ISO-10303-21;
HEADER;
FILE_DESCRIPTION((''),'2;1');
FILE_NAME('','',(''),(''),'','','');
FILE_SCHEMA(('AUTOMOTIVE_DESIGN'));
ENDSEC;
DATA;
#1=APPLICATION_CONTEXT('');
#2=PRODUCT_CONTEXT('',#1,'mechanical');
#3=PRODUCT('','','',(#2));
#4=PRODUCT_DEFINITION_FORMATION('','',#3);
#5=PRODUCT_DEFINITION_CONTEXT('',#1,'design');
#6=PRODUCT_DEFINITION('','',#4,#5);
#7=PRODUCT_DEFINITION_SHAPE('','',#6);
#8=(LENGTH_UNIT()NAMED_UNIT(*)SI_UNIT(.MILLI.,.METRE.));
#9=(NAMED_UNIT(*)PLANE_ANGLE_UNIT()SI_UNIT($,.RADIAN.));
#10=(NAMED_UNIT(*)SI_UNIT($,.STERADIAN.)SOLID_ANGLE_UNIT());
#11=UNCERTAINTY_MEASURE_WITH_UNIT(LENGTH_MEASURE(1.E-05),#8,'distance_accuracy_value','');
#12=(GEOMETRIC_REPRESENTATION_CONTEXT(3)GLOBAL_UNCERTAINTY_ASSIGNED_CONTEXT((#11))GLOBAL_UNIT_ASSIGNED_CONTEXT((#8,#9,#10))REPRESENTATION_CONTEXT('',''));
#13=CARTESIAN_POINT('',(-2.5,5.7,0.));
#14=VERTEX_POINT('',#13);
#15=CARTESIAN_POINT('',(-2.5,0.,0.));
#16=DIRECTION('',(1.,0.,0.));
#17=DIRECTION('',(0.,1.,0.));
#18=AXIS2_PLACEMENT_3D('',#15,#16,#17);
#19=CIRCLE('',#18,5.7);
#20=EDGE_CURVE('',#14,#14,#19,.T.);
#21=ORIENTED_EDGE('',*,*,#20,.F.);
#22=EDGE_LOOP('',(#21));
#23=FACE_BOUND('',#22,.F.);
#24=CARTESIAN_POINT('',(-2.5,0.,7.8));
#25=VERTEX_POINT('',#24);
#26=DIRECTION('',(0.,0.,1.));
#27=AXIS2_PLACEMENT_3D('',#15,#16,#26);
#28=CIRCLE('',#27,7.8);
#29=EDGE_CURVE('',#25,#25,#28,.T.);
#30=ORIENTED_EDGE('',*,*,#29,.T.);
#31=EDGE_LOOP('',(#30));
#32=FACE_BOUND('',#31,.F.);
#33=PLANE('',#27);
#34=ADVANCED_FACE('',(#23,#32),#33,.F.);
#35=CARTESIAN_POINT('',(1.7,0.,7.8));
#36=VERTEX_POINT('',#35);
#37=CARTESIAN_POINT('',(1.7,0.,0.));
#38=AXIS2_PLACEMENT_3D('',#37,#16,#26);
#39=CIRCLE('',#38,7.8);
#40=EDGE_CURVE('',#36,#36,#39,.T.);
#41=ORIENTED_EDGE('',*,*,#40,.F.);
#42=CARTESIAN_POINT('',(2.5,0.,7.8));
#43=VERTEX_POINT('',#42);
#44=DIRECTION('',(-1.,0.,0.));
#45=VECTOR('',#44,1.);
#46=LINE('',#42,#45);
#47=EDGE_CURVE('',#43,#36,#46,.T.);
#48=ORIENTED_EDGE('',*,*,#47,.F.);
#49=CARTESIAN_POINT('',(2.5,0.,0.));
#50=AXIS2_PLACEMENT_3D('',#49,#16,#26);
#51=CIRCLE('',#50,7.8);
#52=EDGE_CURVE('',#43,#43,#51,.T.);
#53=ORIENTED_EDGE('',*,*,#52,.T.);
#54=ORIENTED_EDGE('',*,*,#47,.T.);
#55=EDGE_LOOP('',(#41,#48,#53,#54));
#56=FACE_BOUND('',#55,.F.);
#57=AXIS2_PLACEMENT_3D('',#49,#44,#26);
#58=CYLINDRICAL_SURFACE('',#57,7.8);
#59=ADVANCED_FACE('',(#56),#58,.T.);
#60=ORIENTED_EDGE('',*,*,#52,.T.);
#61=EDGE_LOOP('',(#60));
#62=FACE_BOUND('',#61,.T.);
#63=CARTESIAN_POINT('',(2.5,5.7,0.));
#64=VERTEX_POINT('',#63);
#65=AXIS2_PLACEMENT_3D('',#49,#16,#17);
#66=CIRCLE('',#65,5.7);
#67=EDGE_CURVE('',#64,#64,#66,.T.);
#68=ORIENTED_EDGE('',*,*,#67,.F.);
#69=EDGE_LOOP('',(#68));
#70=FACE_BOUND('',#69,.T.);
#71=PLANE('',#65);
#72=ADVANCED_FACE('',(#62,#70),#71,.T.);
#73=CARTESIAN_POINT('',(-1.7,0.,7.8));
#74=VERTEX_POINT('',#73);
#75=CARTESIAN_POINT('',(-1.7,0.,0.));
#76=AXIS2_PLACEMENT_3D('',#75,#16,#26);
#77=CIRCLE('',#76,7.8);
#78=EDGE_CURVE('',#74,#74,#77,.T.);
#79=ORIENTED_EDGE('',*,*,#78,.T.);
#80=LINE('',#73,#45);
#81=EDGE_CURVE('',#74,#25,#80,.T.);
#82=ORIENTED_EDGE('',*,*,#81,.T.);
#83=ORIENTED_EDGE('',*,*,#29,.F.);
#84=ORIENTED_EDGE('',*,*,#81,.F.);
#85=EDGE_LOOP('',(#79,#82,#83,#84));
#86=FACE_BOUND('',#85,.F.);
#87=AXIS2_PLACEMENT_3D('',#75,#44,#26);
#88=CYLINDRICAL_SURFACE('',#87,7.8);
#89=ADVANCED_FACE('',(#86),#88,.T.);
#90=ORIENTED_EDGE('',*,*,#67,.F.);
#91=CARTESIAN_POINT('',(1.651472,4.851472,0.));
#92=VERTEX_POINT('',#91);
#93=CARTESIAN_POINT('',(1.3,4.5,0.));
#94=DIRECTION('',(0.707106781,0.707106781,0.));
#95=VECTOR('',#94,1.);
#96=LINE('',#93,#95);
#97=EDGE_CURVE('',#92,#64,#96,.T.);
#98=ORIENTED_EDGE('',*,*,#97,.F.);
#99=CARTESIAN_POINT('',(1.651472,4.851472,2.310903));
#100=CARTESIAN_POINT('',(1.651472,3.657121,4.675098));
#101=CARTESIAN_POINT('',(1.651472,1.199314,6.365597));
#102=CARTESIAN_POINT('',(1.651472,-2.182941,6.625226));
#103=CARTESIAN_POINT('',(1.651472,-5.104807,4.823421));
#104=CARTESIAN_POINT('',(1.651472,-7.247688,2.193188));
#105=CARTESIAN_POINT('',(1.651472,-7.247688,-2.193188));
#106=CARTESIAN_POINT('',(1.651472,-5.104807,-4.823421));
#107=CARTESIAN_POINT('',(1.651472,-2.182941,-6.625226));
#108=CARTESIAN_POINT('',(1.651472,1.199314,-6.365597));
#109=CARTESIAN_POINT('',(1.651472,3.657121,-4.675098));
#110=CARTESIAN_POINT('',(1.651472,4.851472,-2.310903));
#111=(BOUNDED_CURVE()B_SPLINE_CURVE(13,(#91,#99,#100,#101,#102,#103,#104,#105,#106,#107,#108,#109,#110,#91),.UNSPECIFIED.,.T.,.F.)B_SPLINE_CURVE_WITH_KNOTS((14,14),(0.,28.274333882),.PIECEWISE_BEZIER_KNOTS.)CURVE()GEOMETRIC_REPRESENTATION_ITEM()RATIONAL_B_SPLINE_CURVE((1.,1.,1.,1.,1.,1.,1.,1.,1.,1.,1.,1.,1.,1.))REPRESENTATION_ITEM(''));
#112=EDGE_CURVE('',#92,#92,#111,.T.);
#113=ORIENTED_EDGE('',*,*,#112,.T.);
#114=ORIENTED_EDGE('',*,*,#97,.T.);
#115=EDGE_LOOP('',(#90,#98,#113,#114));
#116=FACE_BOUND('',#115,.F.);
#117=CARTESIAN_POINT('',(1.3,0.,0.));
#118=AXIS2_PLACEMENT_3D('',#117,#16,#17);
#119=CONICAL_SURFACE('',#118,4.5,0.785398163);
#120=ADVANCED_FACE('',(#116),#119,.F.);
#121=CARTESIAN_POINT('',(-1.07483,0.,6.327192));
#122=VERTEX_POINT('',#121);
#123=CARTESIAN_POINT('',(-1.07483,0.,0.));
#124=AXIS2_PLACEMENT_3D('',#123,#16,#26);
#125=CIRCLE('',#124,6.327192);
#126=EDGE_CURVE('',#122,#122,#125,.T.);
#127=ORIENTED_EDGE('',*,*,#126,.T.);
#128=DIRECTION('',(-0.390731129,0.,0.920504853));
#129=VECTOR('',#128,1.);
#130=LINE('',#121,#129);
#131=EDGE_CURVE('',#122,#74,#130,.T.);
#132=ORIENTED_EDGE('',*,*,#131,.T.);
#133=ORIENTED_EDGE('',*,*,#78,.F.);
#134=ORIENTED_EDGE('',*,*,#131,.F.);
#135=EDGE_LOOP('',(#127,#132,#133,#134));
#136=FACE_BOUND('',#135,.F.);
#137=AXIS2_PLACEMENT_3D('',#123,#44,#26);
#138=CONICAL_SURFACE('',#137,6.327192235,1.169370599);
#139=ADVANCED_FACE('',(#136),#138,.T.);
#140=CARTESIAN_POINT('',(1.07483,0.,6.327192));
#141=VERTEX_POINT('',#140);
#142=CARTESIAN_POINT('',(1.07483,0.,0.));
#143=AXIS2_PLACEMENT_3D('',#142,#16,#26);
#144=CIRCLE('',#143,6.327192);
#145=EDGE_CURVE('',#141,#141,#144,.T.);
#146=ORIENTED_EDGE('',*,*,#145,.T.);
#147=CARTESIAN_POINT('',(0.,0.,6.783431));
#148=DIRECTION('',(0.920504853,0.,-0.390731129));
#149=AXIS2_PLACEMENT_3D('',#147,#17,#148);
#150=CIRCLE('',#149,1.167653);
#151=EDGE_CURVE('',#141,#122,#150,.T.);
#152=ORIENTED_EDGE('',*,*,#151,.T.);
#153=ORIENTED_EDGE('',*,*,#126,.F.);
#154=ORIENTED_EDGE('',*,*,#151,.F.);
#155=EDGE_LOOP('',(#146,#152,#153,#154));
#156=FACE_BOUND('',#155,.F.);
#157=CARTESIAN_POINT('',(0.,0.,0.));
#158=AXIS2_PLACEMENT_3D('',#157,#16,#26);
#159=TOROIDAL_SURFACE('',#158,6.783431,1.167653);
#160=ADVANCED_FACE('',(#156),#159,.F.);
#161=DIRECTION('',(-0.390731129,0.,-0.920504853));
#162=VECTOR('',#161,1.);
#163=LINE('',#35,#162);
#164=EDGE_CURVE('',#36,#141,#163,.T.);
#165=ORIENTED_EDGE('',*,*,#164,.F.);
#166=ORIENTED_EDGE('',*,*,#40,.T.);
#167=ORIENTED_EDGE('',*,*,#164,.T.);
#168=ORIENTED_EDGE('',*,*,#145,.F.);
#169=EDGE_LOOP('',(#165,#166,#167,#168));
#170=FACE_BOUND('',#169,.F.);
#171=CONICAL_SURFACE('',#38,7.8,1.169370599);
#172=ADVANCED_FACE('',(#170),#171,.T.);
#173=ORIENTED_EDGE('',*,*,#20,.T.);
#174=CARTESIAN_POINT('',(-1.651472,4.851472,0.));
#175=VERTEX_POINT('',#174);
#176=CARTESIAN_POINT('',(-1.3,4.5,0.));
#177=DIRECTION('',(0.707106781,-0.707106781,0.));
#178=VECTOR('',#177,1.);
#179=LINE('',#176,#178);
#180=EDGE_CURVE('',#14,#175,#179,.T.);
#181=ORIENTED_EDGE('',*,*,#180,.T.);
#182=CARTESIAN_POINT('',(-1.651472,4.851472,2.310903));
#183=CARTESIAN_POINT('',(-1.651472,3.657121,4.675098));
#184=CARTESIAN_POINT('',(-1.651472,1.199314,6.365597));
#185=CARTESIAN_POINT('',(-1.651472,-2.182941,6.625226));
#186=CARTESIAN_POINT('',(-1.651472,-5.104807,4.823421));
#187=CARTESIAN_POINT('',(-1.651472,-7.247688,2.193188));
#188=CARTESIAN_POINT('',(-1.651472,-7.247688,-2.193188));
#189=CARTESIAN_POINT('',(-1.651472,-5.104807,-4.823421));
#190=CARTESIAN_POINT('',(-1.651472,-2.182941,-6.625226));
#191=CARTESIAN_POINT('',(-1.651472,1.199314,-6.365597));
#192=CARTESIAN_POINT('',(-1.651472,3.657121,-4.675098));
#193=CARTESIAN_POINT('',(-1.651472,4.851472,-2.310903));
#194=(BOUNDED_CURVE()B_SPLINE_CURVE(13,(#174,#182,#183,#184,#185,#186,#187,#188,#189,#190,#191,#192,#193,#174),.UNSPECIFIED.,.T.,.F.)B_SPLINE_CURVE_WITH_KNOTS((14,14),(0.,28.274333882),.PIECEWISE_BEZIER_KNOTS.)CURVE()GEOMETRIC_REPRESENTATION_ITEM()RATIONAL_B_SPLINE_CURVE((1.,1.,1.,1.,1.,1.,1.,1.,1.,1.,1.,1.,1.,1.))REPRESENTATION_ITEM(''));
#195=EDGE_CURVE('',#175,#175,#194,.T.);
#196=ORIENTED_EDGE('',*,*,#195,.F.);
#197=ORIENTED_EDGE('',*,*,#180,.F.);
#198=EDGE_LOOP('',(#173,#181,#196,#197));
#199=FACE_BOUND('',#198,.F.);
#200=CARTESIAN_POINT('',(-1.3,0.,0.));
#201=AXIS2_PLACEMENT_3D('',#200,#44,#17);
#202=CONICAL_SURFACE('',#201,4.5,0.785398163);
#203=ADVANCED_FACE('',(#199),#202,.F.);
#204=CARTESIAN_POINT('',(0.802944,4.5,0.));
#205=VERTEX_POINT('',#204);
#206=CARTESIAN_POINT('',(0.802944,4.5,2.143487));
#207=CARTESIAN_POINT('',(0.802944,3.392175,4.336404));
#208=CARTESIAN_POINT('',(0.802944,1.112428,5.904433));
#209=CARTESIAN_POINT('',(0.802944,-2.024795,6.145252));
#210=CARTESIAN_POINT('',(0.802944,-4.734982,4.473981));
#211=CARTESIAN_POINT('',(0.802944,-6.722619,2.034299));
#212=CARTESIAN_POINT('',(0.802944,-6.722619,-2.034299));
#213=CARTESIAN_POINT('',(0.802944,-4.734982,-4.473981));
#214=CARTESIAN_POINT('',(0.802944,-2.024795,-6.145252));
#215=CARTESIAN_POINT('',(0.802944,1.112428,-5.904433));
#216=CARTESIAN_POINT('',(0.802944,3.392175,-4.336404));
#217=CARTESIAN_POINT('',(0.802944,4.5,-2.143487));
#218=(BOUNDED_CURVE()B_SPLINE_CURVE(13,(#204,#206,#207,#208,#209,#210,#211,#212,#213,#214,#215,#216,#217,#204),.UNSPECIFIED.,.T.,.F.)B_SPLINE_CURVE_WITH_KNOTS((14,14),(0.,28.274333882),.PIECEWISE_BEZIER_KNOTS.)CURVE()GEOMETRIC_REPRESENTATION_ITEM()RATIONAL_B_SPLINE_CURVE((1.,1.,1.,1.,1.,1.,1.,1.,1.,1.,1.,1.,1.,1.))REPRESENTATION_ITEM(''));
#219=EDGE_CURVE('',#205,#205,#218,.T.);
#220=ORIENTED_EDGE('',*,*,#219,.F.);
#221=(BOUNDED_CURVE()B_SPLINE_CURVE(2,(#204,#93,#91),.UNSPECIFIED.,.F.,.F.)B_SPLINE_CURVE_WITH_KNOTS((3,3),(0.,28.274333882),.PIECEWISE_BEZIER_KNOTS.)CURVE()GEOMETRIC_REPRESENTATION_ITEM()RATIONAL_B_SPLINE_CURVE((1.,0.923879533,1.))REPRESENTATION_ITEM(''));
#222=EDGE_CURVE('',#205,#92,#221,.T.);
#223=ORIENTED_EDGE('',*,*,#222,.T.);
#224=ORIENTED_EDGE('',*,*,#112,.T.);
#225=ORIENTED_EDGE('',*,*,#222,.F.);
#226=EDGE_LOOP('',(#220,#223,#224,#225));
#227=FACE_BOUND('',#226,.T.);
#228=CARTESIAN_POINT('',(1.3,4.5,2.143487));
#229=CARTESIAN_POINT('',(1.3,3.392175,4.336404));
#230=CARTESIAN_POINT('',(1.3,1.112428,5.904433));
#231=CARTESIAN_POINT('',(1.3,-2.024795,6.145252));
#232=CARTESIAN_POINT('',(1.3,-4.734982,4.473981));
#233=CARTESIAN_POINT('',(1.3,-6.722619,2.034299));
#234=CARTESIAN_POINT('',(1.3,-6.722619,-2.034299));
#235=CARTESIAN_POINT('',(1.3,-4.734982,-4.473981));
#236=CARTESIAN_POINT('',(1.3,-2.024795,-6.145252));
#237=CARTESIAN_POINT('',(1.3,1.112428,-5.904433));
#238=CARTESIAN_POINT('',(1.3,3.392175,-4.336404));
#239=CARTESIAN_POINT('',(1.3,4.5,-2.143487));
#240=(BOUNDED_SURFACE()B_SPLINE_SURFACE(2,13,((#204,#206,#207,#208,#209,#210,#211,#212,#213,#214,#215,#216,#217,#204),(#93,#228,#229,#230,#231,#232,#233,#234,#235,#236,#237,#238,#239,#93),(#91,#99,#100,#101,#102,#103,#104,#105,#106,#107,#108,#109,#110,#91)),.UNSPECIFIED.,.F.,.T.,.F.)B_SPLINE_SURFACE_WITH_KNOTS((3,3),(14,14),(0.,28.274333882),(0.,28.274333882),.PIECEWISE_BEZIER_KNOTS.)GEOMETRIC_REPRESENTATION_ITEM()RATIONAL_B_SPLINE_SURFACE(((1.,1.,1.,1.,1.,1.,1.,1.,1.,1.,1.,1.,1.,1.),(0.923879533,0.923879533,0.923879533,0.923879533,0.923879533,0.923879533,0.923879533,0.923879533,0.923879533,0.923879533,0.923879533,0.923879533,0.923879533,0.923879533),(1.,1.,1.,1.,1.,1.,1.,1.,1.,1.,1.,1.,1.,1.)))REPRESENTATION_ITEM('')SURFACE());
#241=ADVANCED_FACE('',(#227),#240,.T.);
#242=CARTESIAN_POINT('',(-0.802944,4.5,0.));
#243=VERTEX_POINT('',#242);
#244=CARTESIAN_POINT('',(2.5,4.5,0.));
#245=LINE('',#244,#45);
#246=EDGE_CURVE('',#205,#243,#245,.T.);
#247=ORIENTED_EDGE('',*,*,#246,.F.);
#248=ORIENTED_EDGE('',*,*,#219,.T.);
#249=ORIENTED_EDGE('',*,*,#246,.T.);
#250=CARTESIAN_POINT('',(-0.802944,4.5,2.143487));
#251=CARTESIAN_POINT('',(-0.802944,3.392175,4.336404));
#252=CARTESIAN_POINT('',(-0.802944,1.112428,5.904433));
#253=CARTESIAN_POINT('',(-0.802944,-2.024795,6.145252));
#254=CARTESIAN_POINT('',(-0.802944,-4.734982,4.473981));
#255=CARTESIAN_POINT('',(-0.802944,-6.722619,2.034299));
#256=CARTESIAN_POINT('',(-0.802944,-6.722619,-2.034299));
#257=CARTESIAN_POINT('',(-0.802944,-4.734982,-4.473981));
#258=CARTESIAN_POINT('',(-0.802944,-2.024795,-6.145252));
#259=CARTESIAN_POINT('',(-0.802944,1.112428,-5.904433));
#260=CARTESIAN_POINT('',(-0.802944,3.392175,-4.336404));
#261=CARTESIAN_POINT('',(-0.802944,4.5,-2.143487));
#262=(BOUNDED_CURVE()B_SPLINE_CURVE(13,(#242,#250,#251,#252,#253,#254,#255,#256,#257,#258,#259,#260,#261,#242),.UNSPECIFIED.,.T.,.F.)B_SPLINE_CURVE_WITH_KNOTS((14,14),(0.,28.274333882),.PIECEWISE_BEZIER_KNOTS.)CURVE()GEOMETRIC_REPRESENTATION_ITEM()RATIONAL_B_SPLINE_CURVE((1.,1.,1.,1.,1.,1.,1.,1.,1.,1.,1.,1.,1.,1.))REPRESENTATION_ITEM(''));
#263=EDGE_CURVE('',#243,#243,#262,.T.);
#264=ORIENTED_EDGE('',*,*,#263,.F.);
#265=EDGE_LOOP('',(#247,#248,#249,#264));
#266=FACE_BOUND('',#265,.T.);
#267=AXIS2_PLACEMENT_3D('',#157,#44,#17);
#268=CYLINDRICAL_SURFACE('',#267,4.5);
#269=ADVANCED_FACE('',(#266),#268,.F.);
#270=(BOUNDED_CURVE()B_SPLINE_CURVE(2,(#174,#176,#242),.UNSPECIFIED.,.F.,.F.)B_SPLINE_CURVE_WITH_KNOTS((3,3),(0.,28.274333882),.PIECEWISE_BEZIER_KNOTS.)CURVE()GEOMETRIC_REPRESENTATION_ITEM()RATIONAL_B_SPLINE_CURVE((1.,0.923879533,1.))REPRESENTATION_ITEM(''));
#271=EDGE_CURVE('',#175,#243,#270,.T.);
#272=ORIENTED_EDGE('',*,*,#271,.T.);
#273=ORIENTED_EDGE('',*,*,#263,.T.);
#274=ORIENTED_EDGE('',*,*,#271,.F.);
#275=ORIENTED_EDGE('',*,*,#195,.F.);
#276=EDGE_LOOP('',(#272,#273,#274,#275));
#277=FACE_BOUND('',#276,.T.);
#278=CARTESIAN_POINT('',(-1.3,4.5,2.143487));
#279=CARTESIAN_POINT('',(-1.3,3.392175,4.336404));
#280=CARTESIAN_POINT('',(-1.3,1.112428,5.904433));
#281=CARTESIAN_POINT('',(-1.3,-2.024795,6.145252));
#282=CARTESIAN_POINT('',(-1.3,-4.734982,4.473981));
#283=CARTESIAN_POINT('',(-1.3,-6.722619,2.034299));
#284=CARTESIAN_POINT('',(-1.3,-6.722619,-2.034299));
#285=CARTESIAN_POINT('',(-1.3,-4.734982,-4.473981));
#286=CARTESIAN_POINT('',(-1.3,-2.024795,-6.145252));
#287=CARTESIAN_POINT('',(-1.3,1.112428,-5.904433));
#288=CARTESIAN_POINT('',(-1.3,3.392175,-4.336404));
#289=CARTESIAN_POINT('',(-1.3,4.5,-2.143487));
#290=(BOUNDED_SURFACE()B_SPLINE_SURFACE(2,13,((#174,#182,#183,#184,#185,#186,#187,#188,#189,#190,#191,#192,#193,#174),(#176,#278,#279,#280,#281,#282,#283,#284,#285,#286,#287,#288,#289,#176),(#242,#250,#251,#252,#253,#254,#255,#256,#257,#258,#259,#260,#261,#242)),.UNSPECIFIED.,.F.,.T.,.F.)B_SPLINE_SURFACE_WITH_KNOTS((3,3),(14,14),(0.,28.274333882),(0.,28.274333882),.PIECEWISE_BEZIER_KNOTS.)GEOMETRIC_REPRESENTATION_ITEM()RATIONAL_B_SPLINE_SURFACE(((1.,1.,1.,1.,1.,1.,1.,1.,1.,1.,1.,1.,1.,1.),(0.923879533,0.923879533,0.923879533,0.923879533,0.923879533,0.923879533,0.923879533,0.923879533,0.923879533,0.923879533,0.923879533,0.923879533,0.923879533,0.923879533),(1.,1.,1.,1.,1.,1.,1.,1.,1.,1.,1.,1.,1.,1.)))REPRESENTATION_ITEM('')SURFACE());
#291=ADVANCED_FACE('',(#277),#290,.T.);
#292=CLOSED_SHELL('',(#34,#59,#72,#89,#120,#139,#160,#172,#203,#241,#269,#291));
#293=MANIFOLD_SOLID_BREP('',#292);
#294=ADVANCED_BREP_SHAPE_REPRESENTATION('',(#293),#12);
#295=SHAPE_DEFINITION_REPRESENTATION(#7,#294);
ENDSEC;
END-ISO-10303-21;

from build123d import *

# Parameters (mm, degrees)
F1_R     = 5
F1_R_2   = 4.5
F3_DEPTH = 2.5
F5_SIZE  = 1.2
F6_R     = 1.2


with BuildPart() as f3:
    # F1 (on Right) → F3 (new body, symmetric)
    with BuildSketch(Plane.YZ):
        Circle(F1_R)
        Circle(F1_R_2, mode=Mode.SUBTRACT)
    extrude(amount=F3_DEPTH, both=True)

    # F2 (on Front) → F4 (revolve)
    with BuildSketch(Plane.XZ):
        with BuildLine():
            Line((-2.5, 7.8), (-2.5, 5))
            Line((-2.5, 5), (0, 5))
            Line((0, 5), (2.5, 5))
            Line((2.5, 5), (2.5, 7.8))
            Line((2.5, 7.8), (1.7, 7.8))
            Line((1.7, 7.8), (1.0748301944, 6.3271922345))
            ThreePointArc((1.0748301944, 6.3271922345), (0, 5.6157776481), (-1.0748301944, 6.3271922345))
            Line((-1.0748301944, 6.3271922345), (-1.7, 7.8))
            Line((-1.7, 7.8), (-2.5, 7.8))
        make_face()
    revolve(axis=Axis((0, 0, 0), (1, 0, 0)))

    # F5
    f5_edges = [f3.edges().sort_by_distance(p)[0] for p in [
        (-2.5, -4.5, 0),
        (2.5, -4.5, 0),
    ]]
    chamfer(f5_edges, length=F5_SIZE)

    # F6
    f6_edges = [f3.edges().sort_by_distance(p)[0] for p in [
        (1.3, -4.5, 0),
        (-1.3, -4.5, 0),
    ]]
    fillet(f6_edges, radius=F6_R)


solid = f3.part
